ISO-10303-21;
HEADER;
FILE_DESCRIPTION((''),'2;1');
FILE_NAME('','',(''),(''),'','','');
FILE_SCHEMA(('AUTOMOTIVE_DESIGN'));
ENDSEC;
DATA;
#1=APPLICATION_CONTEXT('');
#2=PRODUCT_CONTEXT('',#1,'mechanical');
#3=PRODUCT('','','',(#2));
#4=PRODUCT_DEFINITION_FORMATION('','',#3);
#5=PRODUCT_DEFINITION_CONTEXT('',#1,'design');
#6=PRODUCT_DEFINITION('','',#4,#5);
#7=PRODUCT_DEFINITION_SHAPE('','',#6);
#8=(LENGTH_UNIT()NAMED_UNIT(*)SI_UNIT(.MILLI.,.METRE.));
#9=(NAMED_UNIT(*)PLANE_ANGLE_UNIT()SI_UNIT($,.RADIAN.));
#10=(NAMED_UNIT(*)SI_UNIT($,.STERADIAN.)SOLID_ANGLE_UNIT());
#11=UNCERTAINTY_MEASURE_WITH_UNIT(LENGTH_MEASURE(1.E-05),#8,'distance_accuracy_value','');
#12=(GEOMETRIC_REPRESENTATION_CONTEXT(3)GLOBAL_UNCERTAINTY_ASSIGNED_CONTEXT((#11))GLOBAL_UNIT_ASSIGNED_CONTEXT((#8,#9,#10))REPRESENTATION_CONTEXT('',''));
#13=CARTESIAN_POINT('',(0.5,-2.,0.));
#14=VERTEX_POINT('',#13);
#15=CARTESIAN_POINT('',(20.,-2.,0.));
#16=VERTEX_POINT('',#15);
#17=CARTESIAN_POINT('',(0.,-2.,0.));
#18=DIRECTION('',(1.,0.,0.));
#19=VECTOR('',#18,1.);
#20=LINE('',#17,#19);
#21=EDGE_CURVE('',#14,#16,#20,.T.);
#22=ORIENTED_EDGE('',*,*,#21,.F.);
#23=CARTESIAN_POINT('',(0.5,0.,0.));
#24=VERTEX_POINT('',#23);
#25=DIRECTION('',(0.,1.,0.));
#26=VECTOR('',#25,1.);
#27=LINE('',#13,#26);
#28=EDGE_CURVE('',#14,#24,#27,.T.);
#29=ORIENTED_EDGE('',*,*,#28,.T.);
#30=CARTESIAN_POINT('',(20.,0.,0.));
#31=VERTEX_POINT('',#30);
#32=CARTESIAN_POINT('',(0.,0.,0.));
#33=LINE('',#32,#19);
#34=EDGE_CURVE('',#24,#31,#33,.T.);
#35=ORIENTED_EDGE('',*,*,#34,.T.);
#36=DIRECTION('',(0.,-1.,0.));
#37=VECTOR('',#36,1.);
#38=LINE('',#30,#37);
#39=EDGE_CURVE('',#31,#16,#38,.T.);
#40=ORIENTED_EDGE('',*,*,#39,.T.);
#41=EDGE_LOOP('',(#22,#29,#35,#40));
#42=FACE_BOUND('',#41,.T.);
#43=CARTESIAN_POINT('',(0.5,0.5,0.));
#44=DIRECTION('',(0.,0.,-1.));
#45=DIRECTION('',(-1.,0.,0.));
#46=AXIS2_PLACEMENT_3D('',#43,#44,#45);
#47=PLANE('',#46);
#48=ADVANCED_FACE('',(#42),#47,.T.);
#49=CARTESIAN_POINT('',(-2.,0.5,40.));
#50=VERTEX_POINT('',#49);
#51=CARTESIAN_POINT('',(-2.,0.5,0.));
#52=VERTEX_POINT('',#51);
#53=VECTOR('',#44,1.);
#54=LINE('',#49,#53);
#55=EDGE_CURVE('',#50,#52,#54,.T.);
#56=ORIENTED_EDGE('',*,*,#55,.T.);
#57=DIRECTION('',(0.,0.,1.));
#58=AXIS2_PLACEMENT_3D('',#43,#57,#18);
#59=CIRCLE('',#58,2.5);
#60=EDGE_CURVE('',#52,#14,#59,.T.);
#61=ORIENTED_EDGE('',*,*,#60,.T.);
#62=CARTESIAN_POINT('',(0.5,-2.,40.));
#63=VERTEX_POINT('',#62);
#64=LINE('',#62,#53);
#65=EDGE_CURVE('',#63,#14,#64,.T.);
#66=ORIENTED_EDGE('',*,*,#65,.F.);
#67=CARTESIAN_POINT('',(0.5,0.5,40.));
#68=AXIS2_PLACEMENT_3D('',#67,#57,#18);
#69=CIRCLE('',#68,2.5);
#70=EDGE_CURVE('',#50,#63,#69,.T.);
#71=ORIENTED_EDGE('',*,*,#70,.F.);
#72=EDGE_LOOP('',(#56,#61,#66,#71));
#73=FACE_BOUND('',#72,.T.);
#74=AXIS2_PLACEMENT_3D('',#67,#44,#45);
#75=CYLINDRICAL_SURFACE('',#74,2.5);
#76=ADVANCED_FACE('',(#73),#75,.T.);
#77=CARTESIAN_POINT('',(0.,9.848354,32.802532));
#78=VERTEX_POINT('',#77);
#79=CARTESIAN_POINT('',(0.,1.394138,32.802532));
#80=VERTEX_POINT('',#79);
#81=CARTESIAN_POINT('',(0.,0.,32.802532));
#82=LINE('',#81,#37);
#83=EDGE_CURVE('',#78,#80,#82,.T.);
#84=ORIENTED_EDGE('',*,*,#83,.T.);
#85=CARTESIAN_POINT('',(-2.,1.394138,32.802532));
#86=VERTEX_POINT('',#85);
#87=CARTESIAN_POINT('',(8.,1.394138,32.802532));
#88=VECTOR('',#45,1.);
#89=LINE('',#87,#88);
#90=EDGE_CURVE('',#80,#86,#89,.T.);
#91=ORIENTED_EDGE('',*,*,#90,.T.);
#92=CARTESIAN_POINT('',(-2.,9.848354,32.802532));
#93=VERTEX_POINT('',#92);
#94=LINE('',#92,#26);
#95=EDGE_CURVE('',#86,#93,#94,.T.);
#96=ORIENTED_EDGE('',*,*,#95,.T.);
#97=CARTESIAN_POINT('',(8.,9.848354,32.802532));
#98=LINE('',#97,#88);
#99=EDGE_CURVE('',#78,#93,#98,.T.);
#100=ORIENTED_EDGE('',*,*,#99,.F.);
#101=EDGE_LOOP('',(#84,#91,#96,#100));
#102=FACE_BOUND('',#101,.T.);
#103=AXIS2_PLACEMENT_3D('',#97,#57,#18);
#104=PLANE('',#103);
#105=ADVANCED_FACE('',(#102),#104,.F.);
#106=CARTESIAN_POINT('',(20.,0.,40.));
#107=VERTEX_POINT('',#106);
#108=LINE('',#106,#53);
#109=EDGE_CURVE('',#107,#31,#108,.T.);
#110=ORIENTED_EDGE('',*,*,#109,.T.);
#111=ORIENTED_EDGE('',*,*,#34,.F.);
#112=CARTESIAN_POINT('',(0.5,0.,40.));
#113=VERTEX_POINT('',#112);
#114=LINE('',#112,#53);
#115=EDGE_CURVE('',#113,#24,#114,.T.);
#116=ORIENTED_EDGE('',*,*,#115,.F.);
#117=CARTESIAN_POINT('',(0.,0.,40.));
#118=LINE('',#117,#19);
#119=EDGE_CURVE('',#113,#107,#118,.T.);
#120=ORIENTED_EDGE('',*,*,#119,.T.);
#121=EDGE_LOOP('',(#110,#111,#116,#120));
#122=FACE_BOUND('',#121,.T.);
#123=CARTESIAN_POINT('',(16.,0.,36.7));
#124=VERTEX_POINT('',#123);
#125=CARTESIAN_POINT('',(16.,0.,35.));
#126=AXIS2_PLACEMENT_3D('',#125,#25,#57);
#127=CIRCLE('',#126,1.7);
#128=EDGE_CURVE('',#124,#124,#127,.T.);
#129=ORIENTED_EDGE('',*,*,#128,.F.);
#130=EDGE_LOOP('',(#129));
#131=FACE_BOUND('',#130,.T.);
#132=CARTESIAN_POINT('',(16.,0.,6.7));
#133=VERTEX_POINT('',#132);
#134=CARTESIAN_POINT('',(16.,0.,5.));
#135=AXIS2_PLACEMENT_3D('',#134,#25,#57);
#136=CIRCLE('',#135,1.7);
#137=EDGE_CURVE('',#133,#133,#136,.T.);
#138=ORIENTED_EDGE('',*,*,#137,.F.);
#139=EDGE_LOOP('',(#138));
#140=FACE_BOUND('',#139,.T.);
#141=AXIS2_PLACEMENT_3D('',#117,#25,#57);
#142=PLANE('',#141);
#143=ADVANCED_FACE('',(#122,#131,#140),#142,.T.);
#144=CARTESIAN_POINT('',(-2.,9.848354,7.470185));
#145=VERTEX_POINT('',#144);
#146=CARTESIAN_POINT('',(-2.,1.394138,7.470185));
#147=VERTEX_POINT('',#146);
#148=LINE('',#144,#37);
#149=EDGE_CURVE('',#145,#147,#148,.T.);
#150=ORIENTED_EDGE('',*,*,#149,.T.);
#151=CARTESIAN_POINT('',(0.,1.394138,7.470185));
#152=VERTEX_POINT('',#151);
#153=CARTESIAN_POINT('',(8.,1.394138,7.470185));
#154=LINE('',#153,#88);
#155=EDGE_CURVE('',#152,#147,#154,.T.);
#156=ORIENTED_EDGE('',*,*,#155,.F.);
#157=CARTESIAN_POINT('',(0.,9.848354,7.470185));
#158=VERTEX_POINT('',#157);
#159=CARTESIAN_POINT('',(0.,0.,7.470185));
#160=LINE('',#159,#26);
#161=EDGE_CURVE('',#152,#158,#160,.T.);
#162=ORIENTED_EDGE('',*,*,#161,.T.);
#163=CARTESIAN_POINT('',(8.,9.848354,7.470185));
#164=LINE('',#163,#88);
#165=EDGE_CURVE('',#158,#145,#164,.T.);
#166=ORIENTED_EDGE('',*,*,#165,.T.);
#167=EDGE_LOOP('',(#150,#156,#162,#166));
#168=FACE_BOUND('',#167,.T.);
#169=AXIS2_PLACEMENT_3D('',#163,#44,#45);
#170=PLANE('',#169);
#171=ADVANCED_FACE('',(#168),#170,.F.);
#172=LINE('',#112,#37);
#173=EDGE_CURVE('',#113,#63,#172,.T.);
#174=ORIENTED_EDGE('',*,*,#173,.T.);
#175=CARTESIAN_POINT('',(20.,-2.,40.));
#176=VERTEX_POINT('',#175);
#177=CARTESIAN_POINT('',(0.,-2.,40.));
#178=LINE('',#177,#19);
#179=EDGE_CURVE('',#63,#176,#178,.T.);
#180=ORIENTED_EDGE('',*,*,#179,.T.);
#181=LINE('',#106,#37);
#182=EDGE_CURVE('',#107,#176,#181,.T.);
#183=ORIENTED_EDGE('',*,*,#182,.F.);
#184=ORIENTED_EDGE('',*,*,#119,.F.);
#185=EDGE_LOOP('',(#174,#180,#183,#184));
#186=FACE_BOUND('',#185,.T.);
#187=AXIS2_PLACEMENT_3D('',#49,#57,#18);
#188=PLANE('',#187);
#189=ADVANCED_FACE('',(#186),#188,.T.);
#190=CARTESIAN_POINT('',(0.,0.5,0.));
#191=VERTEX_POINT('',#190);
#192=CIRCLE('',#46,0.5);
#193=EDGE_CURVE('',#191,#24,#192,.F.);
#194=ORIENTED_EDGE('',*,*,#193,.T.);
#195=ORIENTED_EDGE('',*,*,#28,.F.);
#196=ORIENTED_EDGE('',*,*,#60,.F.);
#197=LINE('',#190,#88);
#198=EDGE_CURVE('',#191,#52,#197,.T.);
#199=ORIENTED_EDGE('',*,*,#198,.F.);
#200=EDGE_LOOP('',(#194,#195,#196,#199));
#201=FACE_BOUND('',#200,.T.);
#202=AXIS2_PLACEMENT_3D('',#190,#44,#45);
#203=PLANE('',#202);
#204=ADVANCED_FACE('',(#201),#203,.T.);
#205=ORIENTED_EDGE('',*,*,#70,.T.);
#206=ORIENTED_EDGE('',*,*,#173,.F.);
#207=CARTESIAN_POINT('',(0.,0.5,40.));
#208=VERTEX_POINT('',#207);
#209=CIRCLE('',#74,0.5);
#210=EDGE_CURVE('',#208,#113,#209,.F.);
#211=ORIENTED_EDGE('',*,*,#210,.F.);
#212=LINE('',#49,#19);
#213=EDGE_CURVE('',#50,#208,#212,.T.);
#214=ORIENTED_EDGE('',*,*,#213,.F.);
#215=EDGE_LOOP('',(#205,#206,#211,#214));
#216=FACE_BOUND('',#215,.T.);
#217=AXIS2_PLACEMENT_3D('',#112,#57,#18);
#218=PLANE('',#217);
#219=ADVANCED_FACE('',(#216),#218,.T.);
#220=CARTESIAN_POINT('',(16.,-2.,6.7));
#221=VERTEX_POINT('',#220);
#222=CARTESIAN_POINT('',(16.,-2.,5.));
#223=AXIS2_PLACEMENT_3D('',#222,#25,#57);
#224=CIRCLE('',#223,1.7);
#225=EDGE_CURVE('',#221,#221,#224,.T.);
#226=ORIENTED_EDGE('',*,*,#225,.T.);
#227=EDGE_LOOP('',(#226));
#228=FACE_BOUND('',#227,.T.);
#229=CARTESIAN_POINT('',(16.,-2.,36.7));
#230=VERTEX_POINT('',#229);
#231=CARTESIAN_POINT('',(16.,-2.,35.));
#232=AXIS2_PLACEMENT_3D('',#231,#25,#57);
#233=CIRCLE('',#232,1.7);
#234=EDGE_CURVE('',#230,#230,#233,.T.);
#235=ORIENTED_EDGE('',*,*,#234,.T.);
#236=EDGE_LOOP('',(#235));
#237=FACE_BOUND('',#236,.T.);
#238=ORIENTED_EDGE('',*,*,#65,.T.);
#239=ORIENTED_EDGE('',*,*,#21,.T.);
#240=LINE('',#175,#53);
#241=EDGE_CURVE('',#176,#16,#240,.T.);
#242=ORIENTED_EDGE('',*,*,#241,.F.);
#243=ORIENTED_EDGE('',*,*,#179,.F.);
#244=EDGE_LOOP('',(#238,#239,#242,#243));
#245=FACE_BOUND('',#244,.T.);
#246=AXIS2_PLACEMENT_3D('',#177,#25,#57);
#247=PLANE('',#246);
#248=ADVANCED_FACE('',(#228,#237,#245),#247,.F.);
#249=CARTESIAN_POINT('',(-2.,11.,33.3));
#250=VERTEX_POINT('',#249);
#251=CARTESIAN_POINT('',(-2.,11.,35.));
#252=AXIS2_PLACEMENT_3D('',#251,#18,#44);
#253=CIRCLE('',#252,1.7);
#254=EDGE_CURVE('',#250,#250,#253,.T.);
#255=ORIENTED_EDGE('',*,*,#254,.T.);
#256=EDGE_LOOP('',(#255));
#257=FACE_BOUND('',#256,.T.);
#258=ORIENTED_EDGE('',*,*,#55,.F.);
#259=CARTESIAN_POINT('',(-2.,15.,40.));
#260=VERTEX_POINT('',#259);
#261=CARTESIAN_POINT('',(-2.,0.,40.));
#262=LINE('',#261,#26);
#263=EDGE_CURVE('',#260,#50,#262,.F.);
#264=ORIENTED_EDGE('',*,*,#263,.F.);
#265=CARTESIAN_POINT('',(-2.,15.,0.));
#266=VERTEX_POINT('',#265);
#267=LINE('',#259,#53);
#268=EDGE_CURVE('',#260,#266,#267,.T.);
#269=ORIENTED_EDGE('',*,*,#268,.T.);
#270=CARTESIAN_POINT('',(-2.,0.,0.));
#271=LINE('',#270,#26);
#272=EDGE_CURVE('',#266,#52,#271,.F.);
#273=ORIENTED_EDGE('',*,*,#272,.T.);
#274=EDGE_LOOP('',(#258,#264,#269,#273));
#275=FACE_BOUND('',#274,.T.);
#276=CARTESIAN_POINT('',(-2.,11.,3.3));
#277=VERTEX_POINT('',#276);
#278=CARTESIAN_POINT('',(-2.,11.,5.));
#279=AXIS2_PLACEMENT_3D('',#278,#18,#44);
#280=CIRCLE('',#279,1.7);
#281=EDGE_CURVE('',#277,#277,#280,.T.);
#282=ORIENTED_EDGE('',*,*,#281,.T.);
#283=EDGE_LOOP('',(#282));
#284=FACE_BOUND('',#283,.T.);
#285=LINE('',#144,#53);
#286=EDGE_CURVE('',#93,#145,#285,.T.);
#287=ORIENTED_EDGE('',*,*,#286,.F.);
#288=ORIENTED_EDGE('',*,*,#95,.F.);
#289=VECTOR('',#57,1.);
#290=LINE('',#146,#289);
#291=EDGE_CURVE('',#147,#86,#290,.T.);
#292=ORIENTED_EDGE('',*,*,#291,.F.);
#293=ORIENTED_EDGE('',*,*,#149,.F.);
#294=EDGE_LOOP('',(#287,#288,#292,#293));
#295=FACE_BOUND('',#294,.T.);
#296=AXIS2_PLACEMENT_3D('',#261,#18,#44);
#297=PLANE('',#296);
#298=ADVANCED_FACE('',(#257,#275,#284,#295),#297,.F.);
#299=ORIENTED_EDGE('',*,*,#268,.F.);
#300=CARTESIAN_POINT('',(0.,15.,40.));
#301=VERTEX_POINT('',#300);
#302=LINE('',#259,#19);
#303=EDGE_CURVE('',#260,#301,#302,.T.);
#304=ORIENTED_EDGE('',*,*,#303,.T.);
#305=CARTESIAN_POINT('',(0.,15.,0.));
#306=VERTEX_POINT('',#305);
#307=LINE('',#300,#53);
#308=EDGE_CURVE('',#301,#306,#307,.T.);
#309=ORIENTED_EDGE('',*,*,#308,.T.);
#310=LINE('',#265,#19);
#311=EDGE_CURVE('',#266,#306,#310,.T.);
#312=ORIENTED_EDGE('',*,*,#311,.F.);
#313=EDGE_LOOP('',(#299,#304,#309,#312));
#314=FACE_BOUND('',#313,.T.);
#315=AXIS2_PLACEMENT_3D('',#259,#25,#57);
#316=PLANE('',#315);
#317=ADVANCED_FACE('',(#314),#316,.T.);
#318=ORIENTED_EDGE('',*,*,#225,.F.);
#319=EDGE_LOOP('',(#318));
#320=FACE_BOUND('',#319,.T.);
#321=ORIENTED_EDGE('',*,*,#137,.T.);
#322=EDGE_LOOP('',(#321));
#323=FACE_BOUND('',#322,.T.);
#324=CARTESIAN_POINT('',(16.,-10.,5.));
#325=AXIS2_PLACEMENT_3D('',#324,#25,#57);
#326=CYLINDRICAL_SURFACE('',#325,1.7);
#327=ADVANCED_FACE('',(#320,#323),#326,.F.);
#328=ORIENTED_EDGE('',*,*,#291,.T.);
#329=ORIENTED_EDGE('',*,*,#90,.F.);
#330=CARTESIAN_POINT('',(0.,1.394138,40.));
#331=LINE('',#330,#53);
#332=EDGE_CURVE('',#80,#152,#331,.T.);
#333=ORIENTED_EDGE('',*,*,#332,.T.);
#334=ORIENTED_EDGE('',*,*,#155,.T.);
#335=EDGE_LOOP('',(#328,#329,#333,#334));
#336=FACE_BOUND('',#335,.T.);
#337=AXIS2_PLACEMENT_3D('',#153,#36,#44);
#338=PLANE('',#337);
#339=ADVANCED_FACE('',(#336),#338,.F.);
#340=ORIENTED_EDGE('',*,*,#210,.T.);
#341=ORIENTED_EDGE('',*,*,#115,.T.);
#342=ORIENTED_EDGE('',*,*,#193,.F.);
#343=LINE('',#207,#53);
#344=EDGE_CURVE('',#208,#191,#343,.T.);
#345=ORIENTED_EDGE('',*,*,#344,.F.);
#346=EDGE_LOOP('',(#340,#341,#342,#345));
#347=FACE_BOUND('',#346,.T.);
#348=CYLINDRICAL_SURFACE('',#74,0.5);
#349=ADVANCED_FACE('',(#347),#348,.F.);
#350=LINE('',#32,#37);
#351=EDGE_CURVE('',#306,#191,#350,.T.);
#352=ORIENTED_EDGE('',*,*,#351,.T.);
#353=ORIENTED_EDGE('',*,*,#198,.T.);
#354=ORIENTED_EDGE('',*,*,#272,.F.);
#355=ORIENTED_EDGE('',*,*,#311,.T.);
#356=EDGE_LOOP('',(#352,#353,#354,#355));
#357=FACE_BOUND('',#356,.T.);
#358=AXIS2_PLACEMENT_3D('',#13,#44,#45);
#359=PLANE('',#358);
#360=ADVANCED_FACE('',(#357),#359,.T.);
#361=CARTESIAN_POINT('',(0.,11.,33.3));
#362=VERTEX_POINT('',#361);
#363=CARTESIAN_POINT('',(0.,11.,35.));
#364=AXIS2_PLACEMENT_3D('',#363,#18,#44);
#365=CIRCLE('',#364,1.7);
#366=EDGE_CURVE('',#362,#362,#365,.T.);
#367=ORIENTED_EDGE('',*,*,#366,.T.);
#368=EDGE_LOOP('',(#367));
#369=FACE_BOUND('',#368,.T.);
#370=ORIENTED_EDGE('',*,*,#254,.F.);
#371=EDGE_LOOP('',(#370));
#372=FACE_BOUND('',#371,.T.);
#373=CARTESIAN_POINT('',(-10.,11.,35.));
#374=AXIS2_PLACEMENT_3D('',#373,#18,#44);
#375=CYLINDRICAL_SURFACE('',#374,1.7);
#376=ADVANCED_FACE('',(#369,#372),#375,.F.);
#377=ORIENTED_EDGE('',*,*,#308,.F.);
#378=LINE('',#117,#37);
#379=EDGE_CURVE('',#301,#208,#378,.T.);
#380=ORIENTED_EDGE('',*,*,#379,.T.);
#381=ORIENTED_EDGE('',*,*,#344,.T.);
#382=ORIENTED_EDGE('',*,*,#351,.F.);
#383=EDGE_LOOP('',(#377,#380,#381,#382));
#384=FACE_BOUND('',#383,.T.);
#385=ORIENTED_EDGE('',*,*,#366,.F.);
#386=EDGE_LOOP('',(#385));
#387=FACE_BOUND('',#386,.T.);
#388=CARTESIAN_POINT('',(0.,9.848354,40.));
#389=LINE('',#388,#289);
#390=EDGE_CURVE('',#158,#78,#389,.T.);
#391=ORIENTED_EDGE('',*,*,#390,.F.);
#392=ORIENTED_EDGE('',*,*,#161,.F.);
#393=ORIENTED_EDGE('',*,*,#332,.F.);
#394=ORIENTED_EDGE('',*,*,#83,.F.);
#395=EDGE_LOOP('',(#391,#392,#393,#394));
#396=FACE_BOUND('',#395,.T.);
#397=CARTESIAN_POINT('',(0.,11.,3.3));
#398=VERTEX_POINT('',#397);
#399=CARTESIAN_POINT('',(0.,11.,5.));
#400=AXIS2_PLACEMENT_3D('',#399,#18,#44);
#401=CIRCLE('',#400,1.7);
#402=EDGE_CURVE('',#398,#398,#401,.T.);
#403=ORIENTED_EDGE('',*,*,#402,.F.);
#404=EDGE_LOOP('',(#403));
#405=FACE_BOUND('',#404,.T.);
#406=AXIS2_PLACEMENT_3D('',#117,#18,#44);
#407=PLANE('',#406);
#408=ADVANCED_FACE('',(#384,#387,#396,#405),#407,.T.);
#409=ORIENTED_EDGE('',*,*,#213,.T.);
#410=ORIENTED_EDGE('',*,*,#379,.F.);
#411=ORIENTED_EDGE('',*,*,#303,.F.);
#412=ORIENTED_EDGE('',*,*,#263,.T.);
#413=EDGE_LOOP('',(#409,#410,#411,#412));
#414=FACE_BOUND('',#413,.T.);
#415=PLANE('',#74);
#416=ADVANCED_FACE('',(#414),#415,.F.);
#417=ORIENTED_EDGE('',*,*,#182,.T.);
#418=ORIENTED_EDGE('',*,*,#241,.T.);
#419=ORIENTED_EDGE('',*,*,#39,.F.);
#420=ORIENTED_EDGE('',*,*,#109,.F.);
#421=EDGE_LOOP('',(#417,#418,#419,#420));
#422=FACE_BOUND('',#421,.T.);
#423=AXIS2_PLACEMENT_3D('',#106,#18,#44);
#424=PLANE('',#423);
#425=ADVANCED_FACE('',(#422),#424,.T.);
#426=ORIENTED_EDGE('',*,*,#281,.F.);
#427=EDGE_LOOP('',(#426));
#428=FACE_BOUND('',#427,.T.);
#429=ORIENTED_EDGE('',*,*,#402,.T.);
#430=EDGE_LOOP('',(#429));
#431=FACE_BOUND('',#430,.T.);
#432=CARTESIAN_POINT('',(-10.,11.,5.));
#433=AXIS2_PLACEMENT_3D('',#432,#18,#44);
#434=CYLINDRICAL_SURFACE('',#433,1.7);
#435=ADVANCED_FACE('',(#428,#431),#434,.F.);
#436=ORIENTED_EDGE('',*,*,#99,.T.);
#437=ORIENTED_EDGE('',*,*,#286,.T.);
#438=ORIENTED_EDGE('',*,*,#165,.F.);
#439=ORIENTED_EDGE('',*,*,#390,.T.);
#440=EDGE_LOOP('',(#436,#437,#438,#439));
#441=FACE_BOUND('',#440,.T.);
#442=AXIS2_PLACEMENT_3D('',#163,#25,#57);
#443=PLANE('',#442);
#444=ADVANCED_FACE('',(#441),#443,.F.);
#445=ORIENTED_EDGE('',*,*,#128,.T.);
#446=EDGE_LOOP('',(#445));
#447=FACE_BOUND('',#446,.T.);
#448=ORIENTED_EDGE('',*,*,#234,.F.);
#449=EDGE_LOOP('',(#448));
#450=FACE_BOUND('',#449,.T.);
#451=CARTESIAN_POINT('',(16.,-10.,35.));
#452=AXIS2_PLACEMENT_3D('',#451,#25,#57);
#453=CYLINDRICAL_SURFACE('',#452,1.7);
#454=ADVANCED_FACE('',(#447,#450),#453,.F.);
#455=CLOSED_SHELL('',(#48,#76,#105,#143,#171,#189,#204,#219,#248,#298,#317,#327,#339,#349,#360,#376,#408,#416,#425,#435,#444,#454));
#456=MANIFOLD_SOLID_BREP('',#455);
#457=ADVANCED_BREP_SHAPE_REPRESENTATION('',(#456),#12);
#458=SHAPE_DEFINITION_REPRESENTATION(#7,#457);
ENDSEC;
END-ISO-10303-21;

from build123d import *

# Parameters (mm, degrees)
SM_BASE_FLANGE_1_DEPTH = 40
SKETCH_6_R             = 1.7
CUT_EXTRUDE_1_DEPTH    = 10
SKETCH_7_R             = 1.7
CUT_EXTRUDE_2_DEPTH    = 10
SKETCH_11_W            = 25.332346726
SKETCH_11_H            = 8.454216192
CUT_EXTRUDE_5_DEPTH    = 10


# Sheet-metal steps are written as plain solids
with BuildPart() as part:
    # Sketch 1 → 基体-法兰1 (new body)
    with BuildSketch(Plane.XY):
        with BuildLine():
            Line((20, 0), (0.5, 0))
            ThreePointArc((0.5, 0), (0.146446609, 0.146446609), (0, 0.5))
            Line((0, 0.5), (0, 15))
            Line((0, 15), (-2, 15))
            Line((-2, 15), (-2, 0.5))
            ThreePointArc((-2, 0.5), (-1.267766953, -1.267766953), (0.5, -2))
            Line((0.5, -2), (20, -2))
            Line((20, -2), (20, 0))
        make_face()
    extrude(amount=SM_BASE_FLANGE_1_DEPTH)

    # 草图6 → 切除-拉伸1 (cut)
    with BuildSketch(Plane(origin=(0, 0, 0), x_dir=(0, 0, -1), z_dir=(1, 0, 0))):
        with Locations((-35, 11)):
            Circle(SKETCH_6_R)
        with Locations((-5, 11)):
            Circle(SKETCH_6_R)
    extrude(amount=-CUT_EXTRUDE_1_DEPTH, mode=Mode.SUBTRACT)

    # 草图7 → 切除-拉伸2 (cut)
    with BuildSketch(Plane(origin=(0, 0, 0), x_dir=(1, 0, 0), z_dir=(0, 1, 0))):
        with Locations(Location((16, -5, 0), (0, 0, 270))):
            Circle(SKETCH_7_R)
        with Locations(Location((16, -35, 0), (0, 0, 270))):
            Circle(SKETCH_7_R)
    extrude(amount=-CUT_EXTRUDE_2_DEPTH, mode=Mode.SUBTRACT)

    # 草图11 → 切除-拉伸5 (cut)
    with BuildSketch(Plane.ZY.offset(2)):
        with Locations((20.136358326, 5.621246346)):
            Rectangle(SKETCH_11_W, SKETCH_11_H)
    extrude(amount=-CUT_EXTRUDE_5_DEPTH, mode=Mode.SUBTRACT)


solid = part.part
